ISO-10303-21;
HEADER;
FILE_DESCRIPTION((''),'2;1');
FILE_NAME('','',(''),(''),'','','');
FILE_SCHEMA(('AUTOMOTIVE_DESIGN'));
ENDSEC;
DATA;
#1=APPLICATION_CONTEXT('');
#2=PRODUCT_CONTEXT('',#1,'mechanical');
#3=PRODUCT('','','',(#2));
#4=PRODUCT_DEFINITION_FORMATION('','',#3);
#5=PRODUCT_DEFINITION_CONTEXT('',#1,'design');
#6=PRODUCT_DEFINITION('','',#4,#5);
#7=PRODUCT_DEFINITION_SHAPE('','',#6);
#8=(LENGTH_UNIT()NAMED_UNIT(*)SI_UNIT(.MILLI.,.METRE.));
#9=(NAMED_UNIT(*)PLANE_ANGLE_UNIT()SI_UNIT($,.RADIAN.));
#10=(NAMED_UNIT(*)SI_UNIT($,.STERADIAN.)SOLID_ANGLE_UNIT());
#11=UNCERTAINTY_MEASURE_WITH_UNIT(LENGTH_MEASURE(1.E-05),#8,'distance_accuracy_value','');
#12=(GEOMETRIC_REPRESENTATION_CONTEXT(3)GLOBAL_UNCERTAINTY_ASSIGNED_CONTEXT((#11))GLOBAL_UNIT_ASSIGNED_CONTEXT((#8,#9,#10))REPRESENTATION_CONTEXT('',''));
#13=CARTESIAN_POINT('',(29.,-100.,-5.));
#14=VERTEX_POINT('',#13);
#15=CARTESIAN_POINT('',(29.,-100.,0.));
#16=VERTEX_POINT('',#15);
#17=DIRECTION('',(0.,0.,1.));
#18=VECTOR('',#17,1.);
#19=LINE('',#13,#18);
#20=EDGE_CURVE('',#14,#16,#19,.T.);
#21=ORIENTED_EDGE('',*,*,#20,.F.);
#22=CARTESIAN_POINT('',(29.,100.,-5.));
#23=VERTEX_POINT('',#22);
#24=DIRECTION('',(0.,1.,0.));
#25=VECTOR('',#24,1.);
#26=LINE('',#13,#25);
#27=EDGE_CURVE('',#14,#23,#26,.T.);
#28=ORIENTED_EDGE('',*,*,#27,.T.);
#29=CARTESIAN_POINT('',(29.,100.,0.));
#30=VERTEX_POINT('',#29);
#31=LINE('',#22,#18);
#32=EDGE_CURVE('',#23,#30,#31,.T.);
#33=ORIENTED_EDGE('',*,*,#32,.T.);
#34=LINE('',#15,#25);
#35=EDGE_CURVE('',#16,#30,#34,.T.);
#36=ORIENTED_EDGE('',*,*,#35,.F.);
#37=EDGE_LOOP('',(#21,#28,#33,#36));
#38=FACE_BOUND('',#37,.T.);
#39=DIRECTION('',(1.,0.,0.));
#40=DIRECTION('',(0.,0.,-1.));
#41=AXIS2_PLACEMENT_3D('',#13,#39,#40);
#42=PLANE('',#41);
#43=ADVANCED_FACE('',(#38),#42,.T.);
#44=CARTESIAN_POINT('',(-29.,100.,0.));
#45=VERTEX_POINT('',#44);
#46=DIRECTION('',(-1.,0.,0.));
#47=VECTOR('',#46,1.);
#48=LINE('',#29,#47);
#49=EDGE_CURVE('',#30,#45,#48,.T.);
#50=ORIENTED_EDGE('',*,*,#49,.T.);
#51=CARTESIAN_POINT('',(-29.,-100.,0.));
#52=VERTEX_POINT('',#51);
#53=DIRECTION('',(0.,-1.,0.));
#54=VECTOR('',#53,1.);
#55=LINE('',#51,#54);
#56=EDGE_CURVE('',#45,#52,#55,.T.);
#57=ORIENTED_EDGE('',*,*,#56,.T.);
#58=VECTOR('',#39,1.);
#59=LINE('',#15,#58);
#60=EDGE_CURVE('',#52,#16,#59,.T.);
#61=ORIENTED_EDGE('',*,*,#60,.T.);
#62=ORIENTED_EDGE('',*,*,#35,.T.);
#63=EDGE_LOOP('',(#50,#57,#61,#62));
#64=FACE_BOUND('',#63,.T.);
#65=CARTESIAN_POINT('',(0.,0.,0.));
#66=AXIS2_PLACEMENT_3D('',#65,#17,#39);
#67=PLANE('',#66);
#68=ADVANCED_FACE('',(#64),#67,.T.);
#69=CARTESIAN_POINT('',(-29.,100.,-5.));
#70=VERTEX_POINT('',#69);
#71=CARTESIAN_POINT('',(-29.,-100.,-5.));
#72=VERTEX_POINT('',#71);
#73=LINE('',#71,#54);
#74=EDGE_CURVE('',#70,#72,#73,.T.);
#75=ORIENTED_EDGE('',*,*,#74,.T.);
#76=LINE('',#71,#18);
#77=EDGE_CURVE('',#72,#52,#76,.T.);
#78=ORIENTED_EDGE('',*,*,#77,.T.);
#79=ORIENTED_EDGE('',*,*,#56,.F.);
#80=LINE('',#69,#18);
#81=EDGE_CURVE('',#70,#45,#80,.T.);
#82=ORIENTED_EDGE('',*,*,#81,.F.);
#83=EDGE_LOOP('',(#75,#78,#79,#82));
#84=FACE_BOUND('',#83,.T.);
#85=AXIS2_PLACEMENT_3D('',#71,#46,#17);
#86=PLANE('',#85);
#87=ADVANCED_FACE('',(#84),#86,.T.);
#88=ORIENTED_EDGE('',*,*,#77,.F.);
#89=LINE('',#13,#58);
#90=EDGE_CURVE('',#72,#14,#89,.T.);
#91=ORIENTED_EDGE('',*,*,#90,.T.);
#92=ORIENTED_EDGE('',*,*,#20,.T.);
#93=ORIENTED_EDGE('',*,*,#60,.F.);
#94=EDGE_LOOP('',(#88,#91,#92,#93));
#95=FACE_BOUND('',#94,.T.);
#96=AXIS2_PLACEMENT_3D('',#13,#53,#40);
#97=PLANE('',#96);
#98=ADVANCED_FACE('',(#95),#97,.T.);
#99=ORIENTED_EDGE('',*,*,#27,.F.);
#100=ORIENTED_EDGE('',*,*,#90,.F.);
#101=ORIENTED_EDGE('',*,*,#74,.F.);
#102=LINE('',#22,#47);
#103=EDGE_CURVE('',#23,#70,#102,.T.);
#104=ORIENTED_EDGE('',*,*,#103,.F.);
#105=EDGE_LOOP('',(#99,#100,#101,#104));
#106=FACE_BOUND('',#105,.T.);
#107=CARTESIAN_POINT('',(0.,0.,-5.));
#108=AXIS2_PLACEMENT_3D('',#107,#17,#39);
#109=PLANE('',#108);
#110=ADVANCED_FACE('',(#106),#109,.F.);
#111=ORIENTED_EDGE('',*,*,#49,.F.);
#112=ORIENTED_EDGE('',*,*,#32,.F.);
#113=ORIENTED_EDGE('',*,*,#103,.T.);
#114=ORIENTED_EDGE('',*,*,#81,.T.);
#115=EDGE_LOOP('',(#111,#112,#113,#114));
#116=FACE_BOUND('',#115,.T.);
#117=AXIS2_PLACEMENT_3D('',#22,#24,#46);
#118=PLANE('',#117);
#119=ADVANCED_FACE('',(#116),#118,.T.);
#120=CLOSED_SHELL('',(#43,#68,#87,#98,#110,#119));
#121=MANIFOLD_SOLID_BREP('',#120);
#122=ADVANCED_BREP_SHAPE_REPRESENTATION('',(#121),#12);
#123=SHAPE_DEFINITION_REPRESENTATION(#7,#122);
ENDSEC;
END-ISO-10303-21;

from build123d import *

# Parameters (mm, degrees)
ESQUISSE1_W               = 58
ESQUISSE1_H               = 200
T_LE_DE_BASE_PLI_E1_DEPTH = 5


# Sheet-metal steps are written as plain solids
with BuildPart() as part:
    # Esquisse1 → Tôle de base pliée1 (new body)
    with BuildSketch(Plane.XY):
        Rectangle(ESQUISSE1_W, ESQUISSE1_H)
    extrude(amount=-T_LE_DE_BASE_PLI_E1_DEPTH)


solid = part.part
